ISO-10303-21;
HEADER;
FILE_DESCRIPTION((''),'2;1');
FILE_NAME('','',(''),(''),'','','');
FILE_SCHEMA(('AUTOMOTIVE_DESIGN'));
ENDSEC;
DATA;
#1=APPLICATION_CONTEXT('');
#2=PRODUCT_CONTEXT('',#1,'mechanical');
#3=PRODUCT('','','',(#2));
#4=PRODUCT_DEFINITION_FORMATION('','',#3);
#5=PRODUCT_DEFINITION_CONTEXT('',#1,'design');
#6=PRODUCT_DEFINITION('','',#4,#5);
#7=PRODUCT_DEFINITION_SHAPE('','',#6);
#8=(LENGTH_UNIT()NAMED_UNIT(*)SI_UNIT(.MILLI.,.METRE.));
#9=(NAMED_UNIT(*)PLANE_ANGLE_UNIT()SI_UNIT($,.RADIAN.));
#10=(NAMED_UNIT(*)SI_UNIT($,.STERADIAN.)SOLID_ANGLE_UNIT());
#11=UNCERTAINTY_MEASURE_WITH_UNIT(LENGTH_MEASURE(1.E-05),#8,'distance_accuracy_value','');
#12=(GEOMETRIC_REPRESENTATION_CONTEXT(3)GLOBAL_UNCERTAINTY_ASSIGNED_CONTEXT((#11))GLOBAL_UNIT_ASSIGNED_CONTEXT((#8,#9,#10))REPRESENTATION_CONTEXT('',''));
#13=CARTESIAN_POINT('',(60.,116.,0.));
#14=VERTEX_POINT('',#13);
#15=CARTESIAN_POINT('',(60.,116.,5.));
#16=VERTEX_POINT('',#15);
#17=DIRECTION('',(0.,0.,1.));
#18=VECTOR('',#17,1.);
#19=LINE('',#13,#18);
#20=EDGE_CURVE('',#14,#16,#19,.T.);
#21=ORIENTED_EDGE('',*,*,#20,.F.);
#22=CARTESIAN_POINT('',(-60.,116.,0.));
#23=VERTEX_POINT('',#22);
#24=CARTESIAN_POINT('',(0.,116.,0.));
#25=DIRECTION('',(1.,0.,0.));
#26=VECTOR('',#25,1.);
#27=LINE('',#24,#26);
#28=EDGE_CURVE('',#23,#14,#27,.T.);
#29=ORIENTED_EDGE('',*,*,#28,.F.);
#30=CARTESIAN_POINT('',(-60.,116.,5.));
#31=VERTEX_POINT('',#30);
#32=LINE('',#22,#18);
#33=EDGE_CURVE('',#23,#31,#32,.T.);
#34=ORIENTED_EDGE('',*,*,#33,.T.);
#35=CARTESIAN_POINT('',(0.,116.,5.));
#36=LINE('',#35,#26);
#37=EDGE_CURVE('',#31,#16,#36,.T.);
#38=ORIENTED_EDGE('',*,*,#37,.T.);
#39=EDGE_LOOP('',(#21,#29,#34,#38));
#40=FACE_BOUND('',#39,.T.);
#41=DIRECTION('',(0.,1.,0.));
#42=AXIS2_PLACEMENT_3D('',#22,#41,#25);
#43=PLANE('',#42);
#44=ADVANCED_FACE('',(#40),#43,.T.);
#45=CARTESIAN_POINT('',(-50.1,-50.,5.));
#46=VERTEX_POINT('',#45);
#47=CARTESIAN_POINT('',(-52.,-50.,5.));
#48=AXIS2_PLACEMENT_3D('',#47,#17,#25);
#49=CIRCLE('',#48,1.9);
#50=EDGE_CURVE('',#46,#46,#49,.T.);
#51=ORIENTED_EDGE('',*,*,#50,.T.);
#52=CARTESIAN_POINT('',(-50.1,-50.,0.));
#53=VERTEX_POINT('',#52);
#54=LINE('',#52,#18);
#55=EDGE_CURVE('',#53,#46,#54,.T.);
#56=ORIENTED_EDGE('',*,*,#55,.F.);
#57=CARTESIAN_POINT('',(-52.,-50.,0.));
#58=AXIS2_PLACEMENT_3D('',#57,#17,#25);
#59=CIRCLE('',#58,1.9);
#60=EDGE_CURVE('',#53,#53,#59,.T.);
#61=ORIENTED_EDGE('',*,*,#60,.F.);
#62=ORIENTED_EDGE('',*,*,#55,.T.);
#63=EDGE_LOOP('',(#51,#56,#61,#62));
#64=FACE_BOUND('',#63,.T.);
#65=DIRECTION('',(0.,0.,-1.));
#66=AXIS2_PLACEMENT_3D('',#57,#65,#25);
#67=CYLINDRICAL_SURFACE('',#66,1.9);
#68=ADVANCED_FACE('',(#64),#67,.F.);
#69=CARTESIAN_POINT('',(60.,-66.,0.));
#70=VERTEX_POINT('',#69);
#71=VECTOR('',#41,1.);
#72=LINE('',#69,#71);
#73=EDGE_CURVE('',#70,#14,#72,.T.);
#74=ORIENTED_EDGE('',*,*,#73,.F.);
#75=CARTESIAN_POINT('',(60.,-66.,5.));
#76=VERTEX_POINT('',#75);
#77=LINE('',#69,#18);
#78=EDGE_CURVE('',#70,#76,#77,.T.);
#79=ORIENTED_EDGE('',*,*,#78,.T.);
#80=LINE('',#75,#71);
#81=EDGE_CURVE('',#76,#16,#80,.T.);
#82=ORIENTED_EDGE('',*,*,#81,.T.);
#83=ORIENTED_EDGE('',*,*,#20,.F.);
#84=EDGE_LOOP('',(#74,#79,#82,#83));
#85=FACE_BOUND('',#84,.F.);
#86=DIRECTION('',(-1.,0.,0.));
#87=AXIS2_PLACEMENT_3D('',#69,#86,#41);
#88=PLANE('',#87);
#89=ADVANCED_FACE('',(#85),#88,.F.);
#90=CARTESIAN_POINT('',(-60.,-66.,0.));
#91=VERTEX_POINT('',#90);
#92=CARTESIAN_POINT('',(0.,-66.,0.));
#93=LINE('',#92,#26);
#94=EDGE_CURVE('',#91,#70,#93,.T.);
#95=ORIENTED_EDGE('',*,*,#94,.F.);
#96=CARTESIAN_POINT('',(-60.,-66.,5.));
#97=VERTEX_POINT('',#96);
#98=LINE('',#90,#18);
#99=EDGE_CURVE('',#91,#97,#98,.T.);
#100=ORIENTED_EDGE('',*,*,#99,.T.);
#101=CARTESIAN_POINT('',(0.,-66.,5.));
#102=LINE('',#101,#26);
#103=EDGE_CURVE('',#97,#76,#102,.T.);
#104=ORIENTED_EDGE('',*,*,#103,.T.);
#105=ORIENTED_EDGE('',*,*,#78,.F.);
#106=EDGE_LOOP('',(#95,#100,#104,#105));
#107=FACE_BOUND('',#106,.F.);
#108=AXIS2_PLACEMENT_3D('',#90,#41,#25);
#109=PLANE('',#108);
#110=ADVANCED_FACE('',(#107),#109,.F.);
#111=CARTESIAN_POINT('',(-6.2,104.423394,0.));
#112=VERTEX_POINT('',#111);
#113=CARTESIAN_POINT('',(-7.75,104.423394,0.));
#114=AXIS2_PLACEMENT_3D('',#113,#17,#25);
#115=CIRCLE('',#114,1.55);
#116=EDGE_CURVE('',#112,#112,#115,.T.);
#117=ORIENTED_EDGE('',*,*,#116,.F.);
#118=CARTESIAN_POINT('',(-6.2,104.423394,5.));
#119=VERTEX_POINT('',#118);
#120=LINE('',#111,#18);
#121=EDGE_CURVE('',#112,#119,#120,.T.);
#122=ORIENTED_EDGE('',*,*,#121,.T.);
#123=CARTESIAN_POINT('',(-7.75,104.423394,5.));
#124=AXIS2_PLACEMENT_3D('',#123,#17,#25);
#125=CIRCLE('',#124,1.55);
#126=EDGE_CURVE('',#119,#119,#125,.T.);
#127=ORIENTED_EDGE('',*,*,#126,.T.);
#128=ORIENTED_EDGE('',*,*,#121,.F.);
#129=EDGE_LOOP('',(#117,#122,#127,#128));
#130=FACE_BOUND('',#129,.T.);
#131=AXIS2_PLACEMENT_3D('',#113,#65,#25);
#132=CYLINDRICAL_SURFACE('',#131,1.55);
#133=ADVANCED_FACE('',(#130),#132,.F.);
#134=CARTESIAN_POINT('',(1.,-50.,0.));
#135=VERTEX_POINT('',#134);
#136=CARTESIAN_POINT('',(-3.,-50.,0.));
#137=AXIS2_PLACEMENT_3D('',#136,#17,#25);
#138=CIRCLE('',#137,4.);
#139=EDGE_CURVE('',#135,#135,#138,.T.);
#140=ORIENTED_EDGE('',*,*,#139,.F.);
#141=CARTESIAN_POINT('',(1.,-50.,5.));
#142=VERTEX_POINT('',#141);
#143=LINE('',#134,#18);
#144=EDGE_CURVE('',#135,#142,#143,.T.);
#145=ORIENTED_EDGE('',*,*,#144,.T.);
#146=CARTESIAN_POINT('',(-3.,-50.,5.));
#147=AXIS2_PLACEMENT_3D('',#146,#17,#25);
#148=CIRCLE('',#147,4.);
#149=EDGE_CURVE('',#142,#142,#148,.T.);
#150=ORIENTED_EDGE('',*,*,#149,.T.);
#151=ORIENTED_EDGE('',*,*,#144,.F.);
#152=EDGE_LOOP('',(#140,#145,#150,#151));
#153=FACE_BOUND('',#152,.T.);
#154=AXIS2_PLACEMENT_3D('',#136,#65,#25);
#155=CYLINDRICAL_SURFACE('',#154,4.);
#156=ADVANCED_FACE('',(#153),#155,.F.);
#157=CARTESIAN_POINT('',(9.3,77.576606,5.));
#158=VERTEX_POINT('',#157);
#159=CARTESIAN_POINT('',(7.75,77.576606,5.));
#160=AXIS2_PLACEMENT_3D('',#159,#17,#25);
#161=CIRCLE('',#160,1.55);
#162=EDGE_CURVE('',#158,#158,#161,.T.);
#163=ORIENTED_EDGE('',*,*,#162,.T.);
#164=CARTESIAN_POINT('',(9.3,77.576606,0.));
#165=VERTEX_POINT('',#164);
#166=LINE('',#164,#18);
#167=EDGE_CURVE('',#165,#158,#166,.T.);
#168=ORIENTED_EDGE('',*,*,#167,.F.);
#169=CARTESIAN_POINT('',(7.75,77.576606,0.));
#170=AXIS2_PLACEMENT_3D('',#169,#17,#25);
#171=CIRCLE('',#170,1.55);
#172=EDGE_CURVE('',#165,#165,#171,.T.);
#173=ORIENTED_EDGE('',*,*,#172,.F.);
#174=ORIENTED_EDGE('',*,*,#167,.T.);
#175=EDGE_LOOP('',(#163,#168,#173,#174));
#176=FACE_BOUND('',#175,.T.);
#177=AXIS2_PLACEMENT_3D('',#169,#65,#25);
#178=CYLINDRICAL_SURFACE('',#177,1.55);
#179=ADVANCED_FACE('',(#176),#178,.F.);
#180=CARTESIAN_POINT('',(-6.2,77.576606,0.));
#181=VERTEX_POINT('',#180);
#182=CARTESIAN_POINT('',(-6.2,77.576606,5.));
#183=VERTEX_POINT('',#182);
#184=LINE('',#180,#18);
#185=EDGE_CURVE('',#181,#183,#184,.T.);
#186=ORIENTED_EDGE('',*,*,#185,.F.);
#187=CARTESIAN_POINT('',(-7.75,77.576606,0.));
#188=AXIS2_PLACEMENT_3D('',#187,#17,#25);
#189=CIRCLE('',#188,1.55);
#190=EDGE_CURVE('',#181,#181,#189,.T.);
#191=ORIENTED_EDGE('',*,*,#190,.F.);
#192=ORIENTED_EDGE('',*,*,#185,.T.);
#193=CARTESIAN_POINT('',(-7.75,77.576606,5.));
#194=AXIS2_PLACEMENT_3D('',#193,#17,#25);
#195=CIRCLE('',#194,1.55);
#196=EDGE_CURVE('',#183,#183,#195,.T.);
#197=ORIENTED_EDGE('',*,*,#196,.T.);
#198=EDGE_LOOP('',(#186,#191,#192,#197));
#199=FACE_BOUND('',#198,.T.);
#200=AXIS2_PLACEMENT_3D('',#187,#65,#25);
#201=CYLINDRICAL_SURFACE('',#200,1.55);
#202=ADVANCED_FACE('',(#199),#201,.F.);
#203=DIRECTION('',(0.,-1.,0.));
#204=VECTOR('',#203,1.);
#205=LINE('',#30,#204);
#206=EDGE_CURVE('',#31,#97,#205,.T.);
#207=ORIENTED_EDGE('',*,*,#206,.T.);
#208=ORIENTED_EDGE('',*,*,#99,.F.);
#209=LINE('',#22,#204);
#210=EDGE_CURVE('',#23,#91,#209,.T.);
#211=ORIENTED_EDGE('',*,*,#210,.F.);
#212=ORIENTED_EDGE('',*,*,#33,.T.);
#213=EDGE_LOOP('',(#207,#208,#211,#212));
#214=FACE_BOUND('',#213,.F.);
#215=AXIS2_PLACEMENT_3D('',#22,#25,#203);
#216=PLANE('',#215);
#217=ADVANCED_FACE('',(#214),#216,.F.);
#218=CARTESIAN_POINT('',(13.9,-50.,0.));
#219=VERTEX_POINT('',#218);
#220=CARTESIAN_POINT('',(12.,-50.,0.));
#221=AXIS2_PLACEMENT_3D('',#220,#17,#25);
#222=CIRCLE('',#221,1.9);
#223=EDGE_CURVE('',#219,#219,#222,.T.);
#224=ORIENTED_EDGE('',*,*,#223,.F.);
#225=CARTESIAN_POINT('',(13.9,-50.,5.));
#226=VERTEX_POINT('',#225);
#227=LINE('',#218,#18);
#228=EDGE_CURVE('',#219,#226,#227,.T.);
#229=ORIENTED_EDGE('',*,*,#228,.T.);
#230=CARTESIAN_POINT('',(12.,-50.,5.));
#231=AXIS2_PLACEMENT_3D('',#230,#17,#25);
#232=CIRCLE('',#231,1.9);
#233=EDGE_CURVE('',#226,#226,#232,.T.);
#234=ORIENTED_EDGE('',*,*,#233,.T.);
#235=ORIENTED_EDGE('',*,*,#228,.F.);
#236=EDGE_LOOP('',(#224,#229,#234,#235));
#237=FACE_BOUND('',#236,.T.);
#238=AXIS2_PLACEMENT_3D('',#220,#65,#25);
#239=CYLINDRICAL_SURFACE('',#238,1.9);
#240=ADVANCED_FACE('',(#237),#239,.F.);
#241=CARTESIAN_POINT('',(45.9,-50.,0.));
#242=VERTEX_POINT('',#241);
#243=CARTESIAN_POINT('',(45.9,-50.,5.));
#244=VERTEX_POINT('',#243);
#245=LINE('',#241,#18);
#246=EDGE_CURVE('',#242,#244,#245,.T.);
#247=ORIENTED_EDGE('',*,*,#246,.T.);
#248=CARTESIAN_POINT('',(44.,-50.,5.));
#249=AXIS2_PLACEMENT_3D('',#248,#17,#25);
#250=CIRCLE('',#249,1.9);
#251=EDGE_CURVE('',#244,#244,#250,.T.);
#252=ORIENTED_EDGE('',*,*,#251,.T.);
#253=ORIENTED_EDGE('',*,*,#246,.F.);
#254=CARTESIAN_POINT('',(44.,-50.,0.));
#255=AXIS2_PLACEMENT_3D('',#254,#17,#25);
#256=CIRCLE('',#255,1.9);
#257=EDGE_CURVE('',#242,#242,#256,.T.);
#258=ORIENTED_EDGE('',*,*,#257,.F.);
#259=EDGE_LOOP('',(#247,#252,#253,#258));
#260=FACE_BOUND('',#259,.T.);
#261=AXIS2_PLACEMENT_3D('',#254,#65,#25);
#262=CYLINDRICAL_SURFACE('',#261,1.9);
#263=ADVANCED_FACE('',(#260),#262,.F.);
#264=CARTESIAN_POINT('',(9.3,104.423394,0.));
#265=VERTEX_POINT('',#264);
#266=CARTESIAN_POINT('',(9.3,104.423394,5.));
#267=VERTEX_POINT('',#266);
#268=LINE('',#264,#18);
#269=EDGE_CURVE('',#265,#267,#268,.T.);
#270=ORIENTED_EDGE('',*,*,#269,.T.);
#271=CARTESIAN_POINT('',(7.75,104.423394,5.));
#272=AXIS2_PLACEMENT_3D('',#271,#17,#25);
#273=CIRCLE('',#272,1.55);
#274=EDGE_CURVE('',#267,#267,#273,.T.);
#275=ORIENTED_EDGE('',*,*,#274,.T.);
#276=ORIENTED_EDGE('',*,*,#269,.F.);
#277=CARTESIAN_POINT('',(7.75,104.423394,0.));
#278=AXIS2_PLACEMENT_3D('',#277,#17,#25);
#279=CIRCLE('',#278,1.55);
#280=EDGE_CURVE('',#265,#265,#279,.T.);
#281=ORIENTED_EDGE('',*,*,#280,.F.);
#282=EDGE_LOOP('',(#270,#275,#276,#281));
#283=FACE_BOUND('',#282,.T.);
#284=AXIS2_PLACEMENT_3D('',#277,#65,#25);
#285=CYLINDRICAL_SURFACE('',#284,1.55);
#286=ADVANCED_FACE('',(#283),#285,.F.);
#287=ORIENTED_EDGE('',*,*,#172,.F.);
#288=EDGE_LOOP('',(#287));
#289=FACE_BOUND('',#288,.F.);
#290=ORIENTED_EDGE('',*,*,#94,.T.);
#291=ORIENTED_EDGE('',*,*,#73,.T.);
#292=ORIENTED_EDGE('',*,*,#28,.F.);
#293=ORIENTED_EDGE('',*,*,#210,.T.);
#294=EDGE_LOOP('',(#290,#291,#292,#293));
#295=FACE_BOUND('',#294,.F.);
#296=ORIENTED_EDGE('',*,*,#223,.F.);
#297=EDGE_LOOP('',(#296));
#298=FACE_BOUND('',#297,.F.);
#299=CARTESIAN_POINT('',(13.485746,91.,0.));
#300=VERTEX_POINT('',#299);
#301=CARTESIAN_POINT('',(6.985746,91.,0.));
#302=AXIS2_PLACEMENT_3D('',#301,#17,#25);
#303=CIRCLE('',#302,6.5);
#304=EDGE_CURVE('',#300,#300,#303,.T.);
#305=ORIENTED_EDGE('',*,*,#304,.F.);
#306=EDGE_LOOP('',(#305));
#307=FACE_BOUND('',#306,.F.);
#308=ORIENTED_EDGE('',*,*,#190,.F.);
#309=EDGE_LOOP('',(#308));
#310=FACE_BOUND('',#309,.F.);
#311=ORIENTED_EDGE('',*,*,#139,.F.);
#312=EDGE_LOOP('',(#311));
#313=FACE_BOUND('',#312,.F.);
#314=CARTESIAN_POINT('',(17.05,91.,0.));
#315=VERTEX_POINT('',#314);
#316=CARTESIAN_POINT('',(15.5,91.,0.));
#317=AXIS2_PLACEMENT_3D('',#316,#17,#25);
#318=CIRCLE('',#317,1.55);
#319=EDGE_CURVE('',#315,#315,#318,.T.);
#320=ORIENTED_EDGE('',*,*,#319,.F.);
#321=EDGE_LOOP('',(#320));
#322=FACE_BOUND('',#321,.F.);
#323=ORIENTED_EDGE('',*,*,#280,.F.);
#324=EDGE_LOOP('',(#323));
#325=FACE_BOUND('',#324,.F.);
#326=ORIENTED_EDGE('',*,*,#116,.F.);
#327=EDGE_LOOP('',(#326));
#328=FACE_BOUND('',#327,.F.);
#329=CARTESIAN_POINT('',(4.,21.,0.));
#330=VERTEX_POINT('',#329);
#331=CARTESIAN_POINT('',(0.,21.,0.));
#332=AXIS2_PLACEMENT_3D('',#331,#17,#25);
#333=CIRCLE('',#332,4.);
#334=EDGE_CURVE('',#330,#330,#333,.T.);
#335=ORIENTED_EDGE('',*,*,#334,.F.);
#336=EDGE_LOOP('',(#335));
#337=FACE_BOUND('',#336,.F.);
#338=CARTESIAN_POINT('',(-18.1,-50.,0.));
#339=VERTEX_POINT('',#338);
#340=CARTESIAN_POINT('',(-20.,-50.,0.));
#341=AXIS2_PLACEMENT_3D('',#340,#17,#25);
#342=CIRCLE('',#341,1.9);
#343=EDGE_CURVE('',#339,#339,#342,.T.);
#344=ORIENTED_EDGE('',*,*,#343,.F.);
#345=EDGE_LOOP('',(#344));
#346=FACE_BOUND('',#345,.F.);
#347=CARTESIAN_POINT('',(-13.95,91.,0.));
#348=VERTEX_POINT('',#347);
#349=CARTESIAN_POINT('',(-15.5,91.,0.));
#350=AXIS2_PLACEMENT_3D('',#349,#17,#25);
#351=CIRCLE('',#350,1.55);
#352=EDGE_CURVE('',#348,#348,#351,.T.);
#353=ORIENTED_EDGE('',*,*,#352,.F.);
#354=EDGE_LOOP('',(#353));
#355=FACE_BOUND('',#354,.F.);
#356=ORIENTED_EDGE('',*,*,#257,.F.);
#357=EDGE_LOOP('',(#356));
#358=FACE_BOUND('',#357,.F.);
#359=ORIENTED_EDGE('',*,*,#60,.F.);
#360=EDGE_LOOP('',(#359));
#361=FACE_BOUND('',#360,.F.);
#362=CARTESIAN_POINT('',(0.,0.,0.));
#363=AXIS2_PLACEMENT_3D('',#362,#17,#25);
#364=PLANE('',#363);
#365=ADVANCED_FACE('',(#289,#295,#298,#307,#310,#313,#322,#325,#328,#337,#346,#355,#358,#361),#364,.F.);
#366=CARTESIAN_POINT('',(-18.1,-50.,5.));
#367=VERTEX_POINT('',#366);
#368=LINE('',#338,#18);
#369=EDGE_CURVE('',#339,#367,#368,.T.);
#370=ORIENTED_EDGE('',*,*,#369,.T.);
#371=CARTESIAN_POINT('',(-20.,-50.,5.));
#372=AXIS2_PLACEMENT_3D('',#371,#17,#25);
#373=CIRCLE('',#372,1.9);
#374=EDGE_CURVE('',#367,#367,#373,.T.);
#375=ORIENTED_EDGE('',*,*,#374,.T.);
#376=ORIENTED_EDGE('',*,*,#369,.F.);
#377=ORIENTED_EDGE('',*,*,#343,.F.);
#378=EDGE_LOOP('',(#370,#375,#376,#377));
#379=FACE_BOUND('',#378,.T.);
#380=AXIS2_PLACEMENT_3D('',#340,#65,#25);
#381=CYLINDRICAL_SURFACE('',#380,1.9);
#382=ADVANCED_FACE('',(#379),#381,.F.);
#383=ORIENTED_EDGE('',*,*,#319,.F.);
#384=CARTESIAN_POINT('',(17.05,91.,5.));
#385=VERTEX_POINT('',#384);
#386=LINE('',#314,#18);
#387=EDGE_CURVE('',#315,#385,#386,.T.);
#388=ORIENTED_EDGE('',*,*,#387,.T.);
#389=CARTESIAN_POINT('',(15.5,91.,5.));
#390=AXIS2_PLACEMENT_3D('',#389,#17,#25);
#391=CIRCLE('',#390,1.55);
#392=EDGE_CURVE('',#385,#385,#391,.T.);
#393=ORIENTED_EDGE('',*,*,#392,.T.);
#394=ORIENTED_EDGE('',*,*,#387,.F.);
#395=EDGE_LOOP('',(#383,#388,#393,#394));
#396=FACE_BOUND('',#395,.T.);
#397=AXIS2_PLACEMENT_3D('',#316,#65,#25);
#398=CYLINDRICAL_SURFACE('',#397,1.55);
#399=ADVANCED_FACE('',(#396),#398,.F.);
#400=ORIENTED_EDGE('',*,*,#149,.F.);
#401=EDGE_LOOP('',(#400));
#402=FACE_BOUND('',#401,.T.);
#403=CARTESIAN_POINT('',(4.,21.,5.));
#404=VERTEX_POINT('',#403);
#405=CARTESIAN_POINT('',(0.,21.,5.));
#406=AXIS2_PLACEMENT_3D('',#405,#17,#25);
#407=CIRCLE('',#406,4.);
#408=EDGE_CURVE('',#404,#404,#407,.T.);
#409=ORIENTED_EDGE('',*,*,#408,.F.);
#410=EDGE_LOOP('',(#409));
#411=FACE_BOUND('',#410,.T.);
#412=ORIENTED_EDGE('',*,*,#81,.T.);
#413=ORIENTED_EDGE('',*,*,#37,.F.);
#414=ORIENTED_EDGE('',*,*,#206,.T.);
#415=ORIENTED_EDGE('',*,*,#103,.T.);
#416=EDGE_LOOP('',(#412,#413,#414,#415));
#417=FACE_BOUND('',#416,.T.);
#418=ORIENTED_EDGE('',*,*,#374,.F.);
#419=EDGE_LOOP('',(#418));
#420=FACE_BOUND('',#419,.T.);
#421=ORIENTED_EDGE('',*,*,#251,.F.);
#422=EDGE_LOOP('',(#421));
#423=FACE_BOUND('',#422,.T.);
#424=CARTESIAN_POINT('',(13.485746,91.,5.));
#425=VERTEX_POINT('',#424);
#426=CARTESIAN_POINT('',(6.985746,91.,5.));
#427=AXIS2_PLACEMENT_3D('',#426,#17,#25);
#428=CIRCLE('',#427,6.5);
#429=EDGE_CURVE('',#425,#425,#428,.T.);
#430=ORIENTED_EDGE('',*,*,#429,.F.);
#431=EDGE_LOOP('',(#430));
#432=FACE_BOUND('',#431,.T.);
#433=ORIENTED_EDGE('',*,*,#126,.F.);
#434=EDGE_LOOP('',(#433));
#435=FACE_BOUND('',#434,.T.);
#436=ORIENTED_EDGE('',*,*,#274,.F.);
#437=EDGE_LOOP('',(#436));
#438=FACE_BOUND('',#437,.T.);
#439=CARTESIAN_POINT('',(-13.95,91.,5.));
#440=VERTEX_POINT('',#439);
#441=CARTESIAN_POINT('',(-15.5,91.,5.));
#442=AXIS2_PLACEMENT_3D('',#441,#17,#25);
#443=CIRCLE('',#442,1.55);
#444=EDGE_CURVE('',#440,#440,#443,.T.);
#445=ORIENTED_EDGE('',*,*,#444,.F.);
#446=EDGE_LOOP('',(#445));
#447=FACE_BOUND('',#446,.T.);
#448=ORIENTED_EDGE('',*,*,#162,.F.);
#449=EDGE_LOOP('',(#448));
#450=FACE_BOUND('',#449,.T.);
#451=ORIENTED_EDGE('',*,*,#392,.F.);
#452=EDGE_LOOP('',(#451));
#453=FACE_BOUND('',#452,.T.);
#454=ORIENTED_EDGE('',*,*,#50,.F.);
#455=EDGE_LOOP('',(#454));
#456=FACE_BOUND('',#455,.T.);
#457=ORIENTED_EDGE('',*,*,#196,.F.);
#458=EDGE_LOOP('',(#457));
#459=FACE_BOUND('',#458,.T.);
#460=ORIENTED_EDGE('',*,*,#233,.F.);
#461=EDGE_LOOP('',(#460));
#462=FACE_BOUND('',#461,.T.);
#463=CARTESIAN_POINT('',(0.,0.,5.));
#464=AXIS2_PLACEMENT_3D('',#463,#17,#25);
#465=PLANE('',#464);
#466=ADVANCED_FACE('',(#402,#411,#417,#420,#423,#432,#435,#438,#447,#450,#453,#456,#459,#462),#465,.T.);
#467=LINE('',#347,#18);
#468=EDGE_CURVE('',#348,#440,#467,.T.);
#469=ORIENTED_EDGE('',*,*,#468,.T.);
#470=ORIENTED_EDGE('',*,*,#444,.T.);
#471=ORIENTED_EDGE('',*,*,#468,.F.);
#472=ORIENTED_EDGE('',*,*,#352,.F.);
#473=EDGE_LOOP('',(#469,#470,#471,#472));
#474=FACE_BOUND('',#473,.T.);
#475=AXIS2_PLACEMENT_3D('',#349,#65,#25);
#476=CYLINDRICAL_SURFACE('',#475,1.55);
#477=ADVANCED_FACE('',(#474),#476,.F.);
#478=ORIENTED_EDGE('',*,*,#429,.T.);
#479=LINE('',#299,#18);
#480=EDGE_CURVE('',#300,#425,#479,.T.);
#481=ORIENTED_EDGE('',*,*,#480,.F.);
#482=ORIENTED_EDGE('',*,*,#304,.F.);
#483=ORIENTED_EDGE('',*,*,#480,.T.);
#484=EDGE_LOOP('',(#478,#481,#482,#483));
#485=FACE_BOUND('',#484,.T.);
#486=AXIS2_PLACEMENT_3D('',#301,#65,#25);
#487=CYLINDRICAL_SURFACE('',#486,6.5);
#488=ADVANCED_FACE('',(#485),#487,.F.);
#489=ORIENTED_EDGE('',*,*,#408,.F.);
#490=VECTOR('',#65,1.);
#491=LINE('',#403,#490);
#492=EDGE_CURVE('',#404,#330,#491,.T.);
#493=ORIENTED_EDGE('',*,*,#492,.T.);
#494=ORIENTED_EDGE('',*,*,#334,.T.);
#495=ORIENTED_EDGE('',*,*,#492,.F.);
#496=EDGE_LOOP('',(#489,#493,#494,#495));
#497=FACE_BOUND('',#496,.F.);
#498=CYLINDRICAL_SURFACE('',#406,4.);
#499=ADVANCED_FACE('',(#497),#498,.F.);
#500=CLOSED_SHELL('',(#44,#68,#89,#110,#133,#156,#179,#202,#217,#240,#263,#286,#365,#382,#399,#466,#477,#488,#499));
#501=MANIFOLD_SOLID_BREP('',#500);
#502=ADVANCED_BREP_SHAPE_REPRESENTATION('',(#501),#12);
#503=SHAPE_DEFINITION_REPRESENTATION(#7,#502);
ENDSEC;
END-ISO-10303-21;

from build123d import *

# Parameters (mm, degrees)
F0_W     = 120
F0_H     = 132
F0_R     = 1.9
F0_R_2   = 4
F0_H_2   = 50
F0_R_3   = 1.55
F0_R_4   = 6.5
F1_DEPTH = 5
F2_R     = 4
F3_DEPTH = 25


# Not quite as in the source:
# - a feature names something its author has since deleted; it is built from what else it names


with BuildPart() as f1:
    # F0 (on Top) → F1 (new body)
    with BuildSketch(Plane.XY):
        Rectangle(F0_W, F0_H)
        with Locations((-52, -50)):
            Circle(F0_R, mode=Mode.SUBTRACT)
        with Locations((-20, -50)):
            Circle(F0_R, mode=Mode.SUBTRACT)
        with Locations((-3, -50)):
            Circle(F0_R_2, mode=Mode.SUBTRACT)
        with Locations((12, -50)):
            Circle(F0_R, mode=Mode.SUBTRACT)
        with Locations((44, -50)):
            Circle(F0_R, mode=Mode.SUBTRACT)
        with Locations((0, 91)):
            Rectangle(F0_W, F0_H_2)
        with Locations((-15.5, 91)):
            Circle(F0_R_3, mode=Mode.SUBTRACT)
        with Locations((-7.75, 77.5766062413)):
            Circle(F0_R_3, mode=Mode.SUBTRACT)
        with Locations((-7.75, 104.4233937587)):
            Circle(F0_R_3, mode=Mode.SUBTRACT)
        with Locations((7.75, 77.5766062413)):
            Circle(F0_R_3, mode=Mode.SUBTRACT)
        with Locations((6.9857463241, 91)):
            Circle(F0_R_4, mode=Mode.SUBTRACT)
        with Locations((15.5, 91)):
            Circle(F0_R_3, mode=Mode.SUBTRACT)
        with Locations((7.75, 104.4233937587)):
            Circle(F0_R_3, mode=Mode.SUBTRACT)
    extrude(amount=F1_DEPTH)

    # F2 (on face) → F3 (cut)
    with BuildSketch(Plane.XY.offset(5)):
        with Locations((0, 21)):
            Circle(F2_R)
    extrude(amount=-F3_DEPTH, mode=Mode.SUBTRACT)


solid = f1.part
